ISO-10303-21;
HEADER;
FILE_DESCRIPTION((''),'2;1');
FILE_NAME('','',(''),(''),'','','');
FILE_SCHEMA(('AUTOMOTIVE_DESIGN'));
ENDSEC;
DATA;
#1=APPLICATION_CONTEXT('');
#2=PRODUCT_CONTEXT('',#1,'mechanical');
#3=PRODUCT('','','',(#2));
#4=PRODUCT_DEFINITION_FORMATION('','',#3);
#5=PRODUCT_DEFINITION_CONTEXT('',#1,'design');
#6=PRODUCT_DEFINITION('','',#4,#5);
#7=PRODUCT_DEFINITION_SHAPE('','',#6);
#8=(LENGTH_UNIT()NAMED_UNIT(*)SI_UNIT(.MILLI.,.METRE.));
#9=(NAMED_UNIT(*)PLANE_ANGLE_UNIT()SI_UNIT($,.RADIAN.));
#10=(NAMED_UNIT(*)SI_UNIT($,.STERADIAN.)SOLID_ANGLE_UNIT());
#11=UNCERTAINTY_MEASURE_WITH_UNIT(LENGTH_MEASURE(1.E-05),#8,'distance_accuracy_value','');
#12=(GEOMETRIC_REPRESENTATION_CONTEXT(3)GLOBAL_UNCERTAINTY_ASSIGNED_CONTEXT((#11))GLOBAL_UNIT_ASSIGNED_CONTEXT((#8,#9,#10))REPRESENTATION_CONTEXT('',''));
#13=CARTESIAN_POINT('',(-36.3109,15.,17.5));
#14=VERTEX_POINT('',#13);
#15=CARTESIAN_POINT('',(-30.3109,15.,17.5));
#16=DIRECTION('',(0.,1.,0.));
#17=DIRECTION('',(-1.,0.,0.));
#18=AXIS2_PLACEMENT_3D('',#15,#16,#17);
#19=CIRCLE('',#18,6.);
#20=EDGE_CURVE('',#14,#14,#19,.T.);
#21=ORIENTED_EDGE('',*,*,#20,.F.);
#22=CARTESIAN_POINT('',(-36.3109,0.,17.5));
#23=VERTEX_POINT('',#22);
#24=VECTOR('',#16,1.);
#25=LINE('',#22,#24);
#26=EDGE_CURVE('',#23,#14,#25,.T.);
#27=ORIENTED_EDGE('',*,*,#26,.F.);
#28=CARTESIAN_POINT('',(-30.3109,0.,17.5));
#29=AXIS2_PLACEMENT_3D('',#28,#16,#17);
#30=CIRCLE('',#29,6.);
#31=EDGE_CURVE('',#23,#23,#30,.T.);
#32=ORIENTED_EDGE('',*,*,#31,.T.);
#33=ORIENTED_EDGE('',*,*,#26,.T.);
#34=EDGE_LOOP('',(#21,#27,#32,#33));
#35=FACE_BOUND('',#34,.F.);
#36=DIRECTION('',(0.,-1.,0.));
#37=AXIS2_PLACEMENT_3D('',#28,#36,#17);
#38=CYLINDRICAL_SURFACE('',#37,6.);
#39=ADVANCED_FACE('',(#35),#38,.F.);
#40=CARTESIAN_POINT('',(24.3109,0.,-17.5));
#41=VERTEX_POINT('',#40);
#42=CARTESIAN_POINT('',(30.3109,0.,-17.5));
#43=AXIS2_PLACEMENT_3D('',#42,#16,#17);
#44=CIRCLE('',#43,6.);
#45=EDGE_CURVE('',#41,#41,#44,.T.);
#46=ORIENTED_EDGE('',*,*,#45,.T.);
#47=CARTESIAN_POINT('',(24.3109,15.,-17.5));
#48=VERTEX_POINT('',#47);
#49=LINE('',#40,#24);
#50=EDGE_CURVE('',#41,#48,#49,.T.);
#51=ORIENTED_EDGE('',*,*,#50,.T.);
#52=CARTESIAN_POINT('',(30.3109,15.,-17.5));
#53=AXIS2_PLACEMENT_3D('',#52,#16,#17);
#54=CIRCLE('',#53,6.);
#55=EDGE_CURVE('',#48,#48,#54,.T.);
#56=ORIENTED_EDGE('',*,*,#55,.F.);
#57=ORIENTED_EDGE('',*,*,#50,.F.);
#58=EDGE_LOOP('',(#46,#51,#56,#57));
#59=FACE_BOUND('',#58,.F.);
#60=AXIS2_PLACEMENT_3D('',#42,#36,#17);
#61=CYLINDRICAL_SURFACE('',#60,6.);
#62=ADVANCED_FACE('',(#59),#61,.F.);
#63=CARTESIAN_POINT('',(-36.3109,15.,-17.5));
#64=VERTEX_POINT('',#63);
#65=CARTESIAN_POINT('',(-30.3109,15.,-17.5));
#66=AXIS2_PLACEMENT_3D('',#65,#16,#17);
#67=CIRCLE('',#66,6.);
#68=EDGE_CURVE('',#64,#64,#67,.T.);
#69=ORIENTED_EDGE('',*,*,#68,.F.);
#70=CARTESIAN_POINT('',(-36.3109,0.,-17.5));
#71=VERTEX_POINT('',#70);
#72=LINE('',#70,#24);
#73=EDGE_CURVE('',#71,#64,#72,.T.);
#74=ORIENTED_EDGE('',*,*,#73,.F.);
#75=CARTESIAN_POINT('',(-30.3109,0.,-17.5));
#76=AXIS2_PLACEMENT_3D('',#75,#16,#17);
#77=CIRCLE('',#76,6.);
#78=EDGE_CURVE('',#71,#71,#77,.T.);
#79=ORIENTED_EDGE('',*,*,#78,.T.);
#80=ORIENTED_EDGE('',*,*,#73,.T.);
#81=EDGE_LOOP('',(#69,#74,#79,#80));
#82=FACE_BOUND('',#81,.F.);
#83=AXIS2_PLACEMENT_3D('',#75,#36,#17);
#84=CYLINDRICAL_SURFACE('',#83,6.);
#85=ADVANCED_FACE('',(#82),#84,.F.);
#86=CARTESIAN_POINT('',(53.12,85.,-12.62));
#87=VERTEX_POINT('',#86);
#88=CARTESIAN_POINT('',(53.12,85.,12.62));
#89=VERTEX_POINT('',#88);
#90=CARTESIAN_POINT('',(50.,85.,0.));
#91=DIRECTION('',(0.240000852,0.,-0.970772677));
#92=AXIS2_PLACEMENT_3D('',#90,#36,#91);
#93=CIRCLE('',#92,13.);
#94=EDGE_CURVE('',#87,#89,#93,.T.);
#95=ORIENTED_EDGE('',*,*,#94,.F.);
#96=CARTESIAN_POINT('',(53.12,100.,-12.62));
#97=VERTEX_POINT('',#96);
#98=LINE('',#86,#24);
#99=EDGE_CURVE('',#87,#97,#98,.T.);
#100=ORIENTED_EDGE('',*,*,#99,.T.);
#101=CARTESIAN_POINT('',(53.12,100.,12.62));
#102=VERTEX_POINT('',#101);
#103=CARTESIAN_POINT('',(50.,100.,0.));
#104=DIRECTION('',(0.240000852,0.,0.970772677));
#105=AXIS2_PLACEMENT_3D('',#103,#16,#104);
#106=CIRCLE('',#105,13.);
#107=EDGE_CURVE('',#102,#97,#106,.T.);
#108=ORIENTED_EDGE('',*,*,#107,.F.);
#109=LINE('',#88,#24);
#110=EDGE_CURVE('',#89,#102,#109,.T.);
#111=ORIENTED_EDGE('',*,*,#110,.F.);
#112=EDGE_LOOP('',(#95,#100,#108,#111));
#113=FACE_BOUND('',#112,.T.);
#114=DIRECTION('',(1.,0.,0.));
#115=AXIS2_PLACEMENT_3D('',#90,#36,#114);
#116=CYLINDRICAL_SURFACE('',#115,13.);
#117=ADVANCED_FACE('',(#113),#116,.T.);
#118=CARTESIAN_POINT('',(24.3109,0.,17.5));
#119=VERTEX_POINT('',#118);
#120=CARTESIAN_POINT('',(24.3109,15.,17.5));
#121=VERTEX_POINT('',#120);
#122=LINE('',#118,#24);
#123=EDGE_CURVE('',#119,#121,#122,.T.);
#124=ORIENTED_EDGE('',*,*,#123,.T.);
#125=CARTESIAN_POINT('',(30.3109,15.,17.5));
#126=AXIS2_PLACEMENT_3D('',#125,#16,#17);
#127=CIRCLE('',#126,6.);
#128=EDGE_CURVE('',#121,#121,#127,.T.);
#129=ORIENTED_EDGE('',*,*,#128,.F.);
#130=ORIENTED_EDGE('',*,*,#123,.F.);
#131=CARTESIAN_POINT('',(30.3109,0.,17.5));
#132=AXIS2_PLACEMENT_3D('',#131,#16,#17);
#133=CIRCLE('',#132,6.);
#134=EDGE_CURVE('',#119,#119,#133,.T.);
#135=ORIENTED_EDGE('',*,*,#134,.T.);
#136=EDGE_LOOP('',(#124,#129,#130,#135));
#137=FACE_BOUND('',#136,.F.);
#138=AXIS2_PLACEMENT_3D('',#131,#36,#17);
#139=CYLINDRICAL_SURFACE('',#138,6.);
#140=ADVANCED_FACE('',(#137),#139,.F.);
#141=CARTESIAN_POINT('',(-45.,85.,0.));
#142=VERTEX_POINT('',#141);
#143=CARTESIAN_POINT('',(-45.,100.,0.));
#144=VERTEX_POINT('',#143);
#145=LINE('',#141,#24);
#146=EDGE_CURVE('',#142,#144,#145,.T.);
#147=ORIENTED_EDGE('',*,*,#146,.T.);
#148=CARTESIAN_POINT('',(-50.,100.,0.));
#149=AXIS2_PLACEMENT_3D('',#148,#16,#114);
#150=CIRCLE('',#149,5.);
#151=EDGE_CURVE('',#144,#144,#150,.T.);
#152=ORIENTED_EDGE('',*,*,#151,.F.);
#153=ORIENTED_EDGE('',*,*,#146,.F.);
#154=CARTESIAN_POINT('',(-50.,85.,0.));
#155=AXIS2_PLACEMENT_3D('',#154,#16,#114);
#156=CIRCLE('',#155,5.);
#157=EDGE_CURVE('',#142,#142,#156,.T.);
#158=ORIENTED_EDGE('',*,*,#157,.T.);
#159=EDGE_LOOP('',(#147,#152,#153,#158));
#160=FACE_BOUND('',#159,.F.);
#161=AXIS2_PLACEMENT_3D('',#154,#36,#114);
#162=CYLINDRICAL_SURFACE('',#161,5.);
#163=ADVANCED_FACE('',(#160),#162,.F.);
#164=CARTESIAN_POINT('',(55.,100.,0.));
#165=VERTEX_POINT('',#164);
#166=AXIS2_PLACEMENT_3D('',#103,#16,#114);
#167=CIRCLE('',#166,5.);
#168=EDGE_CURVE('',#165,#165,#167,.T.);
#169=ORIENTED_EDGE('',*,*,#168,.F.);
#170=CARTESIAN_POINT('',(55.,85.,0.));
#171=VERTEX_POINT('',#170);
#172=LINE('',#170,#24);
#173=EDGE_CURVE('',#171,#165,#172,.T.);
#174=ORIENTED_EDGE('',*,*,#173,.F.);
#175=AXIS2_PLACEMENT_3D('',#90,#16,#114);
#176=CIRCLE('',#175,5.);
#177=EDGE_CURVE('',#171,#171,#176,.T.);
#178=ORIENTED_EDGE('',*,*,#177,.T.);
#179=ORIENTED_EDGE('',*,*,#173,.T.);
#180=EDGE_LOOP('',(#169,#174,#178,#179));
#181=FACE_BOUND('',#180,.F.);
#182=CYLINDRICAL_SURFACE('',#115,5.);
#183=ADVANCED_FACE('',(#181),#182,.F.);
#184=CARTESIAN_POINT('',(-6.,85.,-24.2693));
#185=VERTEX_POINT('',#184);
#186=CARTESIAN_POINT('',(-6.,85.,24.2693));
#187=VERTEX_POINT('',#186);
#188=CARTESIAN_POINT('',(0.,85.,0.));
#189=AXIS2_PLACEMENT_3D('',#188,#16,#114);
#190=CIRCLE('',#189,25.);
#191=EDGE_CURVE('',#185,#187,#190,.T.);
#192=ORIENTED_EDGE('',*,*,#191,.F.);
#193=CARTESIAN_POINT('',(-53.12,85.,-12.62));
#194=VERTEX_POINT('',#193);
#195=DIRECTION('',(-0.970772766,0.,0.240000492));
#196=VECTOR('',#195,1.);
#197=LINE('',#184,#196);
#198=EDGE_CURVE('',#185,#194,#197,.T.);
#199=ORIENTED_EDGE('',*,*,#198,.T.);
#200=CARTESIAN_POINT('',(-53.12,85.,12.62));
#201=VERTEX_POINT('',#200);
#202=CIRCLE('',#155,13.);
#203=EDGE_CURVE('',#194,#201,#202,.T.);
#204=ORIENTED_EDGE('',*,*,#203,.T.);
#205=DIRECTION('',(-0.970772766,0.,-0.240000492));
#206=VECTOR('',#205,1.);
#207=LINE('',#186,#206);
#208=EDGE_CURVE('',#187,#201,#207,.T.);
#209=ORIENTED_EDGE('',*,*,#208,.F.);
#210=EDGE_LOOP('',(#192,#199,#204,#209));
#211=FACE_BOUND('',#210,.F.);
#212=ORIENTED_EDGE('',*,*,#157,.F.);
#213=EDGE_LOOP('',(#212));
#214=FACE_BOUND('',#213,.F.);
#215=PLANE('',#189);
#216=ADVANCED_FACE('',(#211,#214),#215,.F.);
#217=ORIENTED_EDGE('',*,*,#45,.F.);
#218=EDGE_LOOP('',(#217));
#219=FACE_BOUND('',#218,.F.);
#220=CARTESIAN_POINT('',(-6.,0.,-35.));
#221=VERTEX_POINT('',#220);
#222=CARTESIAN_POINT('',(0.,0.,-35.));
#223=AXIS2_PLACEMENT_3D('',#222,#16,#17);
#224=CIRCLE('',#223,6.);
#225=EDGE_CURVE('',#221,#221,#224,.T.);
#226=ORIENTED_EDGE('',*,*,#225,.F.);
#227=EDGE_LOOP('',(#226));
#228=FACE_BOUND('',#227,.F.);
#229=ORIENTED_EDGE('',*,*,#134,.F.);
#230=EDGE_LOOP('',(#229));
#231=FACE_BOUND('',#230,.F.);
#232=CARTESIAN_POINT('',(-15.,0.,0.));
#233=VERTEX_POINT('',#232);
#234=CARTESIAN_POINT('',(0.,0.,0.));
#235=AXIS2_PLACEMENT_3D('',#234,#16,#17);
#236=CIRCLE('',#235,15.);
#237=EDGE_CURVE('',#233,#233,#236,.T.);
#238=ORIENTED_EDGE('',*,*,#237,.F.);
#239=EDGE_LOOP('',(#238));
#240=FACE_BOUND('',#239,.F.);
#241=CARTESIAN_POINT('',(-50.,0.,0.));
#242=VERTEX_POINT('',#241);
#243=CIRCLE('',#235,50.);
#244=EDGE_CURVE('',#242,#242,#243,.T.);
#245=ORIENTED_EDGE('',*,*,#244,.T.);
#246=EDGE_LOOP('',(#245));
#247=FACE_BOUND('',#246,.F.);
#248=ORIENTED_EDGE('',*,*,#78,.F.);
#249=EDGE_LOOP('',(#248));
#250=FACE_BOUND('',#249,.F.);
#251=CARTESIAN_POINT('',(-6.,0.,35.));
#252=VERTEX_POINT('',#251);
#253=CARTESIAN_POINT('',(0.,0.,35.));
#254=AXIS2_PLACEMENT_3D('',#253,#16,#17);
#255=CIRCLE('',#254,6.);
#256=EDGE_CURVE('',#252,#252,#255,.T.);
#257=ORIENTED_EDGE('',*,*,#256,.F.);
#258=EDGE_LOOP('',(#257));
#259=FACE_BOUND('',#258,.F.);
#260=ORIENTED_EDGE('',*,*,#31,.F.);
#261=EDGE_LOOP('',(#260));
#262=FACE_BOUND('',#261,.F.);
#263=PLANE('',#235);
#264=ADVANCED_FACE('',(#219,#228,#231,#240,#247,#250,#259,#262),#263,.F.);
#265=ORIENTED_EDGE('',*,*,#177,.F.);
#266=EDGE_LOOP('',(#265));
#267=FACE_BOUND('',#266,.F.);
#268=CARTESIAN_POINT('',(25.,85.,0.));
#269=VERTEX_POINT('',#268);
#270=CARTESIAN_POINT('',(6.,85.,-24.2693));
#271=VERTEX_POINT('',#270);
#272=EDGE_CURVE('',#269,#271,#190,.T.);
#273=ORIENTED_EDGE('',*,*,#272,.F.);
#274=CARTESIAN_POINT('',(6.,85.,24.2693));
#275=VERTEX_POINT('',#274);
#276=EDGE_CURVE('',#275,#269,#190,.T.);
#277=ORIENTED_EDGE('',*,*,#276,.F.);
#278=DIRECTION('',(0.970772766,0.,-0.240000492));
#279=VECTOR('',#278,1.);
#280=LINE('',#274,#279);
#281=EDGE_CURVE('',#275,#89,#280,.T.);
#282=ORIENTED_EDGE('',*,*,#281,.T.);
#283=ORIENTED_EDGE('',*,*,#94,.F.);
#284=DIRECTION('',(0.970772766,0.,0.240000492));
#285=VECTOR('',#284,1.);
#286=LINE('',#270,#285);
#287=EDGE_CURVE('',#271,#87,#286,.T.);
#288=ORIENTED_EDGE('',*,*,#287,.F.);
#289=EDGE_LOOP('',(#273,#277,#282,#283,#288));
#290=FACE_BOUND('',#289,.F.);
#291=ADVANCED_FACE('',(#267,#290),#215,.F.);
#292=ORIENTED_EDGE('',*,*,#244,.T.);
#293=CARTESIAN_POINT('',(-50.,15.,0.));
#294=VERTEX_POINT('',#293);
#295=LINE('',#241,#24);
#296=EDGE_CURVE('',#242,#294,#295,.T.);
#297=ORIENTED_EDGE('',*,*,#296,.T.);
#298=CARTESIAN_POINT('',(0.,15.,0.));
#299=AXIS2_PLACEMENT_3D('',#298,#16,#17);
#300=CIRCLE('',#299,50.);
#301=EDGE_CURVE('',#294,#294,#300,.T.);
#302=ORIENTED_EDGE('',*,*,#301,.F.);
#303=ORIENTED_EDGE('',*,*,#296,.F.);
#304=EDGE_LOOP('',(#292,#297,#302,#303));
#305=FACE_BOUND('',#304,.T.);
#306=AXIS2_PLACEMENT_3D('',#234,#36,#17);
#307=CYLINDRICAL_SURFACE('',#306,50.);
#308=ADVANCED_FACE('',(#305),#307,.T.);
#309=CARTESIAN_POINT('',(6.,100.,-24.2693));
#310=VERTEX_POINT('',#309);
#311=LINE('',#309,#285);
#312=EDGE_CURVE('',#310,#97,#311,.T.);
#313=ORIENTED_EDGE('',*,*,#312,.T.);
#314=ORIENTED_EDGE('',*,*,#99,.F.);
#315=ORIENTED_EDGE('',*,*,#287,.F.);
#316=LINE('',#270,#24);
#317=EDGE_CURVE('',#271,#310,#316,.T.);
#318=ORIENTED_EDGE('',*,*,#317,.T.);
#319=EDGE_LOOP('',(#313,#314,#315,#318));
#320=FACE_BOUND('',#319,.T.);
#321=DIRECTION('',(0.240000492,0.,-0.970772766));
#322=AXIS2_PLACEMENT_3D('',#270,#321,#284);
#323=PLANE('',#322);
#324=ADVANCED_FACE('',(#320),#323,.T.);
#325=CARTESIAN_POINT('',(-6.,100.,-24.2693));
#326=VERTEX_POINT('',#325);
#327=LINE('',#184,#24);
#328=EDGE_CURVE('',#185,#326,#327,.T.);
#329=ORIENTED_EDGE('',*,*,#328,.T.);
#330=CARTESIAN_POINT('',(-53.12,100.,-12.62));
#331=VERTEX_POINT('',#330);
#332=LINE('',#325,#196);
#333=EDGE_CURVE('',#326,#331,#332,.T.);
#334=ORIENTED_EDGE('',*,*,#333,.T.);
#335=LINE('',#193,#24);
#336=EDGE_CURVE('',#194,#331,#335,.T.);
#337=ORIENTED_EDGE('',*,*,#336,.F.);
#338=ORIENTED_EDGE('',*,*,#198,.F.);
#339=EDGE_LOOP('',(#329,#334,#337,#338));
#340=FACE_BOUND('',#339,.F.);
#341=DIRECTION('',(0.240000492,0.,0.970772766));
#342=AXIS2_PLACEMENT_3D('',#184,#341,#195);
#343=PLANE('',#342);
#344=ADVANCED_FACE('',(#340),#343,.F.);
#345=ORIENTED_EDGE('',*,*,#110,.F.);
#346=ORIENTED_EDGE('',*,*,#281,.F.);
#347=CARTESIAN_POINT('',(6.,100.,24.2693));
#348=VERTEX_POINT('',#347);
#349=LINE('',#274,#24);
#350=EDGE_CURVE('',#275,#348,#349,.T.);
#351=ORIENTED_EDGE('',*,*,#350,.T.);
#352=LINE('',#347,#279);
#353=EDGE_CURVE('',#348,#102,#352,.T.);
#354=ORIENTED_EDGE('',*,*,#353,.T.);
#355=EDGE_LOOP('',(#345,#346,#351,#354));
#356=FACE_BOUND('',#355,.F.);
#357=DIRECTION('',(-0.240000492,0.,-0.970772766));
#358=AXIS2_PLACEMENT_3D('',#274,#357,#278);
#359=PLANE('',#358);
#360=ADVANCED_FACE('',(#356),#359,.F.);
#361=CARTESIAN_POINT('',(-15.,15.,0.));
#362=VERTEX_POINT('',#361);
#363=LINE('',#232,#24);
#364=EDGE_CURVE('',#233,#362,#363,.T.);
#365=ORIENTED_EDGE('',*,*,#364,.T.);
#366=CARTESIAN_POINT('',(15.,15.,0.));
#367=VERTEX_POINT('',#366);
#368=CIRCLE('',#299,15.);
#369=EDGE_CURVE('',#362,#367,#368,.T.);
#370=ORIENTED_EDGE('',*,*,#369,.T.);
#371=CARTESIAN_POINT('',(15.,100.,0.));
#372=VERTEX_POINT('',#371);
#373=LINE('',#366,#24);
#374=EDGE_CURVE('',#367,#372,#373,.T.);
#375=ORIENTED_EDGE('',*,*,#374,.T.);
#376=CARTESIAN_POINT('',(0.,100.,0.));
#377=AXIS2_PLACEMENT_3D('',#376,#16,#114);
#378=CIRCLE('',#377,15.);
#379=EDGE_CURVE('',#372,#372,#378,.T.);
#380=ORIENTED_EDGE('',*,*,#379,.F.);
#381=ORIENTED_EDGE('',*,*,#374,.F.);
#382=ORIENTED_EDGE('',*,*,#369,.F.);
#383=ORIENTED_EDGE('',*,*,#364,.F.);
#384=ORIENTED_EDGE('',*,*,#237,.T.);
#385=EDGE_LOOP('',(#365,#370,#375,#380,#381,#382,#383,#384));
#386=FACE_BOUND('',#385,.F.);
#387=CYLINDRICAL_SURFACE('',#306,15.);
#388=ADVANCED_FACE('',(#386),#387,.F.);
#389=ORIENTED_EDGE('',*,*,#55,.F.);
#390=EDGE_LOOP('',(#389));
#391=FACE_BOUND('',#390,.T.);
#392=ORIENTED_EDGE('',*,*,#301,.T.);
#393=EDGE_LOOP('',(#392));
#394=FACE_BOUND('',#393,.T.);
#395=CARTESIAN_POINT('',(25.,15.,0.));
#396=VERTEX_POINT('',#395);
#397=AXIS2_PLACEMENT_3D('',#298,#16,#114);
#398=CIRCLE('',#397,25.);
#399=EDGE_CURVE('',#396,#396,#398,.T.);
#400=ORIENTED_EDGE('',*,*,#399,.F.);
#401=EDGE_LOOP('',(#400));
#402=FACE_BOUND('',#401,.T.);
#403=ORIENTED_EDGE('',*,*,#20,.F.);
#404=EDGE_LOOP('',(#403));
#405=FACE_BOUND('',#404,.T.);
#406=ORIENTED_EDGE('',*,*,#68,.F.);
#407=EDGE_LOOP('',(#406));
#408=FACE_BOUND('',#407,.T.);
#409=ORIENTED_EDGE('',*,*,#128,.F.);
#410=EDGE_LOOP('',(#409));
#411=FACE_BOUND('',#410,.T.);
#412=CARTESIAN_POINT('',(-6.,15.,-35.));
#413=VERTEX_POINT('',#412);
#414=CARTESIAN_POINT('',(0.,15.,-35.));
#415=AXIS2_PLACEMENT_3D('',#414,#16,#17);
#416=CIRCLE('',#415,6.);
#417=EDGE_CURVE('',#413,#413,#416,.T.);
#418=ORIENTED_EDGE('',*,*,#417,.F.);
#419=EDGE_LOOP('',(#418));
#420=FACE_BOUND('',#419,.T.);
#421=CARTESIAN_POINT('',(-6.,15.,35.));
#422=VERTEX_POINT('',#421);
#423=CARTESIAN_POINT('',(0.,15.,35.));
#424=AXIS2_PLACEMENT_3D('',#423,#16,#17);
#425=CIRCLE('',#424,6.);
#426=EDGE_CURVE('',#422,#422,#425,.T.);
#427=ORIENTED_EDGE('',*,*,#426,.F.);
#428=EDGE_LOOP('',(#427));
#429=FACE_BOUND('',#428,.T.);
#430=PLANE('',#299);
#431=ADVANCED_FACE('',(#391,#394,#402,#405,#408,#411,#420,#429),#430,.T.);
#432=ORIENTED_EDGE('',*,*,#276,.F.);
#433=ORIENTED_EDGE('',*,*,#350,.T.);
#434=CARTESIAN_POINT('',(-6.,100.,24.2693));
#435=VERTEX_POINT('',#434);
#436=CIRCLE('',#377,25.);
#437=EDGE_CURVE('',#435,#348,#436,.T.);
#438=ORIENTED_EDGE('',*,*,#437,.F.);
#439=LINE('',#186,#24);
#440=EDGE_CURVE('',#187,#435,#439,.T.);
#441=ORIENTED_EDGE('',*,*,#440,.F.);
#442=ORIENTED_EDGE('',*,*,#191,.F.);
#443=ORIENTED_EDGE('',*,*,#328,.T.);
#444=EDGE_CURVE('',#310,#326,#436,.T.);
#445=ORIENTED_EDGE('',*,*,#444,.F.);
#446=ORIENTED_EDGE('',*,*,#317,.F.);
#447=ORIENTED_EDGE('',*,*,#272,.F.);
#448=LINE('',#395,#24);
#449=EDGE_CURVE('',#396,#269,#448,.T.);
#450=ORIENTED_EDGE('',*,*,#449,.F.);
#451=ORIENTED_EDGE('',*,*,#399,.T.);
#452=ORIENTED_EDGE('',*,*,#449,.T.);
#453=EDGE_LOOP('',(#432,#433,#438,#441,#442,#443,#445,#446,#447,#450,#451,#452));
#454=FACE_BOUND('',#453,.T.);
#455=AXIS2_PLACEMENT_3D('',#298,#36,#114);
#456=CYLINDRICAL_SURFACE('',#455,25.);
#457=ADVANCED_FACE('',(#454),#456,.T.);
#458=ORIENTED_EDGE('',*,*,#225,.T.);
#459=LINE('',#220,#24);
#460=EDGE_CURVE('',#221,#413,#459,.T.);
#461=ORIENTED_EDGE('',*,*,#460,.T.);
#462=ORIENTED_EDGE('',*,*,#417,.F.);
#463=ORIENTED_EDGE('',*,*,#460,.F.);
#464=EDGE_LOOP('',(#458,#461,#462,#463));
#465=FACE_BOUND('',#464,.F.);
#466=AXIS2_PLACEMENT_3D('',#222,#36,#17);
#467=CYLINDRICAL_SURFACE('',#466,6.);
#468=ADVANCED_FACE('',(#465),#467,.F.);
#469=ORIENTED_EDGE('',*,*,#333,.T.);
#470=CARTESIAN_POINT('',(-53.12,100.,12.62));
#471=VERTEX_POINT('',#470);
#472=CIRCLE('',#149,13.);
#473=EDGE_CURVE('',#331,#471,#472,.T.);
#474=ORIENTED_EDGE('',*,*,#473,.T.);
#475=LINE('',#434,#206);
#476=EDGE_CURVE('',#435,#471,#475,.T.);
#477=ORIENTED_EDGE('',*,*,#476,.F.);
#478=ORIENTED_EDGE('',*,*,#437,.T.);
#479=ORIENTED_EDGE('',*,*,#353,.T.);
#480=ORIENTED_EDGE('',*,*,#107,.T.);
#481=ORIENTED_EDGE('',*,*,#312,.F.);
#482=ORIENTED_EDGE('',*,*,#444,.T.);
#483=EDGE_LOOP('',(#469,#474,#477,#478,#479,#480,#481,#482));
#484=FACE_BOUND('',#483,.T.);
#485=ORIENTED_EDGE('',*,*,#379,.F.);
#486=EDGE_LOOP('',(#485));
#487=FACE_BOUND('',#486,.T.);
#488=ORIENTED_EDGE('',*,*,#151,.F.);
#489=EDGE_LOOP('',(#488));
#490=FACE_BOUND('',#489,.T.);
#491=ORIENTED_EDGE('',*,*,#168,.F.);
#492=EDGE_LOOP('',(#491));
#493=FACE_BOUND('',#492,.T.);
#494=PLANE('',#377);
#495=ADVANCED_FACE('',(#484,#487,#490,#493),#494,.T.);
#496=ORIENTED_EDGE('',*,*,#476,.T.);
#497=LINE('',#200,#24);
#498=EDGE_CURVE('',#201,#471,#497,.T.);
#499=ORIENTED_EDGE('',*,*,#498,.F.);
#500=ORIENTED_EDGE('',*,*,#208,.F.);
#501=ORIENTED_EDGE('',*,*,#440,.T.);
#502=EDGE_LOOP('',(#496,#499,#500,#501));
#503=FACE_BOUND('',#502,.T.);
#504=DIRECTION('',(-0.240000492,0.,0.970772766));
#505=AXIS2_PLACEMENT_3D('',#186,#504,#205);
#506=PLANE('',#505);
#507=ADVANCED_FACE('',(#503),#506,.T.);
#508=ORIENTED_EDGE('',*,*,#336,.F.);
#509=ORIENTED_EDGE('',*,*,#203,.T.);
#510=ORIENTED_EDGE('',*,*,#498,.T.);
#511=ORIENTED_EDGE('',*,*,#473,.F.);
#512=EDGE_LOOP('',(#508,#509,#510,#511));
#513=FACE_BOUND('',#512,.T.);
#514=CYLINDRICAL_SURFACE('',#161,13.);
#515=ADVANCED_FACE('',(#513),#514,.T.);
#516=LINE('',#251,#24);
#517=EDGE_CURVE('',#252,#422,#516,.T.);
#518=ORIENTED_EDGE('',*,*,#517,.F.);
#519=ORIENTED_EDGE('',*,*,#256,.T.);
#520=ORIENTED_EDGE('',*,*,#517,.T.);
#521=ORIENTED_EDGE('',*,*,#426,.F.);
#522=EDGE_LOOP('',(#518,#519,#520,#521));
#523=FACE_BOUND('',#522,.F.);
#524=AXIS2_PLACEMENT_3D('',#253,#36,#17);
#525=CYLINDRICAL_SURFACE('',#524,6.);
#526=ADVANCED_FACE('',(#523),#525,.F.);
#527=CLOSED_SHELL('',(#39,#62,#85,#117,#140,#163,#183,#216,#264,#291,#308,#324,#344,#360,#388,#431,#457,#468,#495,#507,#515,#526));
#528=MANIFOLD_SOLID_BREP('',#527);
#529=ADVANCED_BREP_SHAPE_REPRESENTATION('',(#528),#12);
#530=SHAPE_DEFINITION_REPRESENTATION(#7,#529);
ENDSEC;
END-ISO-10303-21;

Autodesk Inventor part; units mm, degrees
ref_plane "YZ Plane" through (0, 0, 0) normal (1, 0, 0) x (0, 1, 0)
ref_plane "XZ Plane" through (0, 0, 0) normal (0, 1, 0) x (-1, 0, 0)
ref_plane "XY Plane" through (0, 0, 0) normal (0, 0, 1) x (1, 0, 0)
sketch "Sketch1" plane through (0, 0, 0) normal (0, 1, 0) x (-1, 0, 0)
  circle A0 centre (0, 0) radius 50
  circle A1 centre (0, 0) radius 15
  circle A2 centre (0, 0) radius 35 construction
  circle A3 centre (0, -35) radius 6
  circle A4 centre (30.3109, -17.5) radius 6
  circle A5 centre (30.3109, 17.5) radius 6
  circle A6 centre (0, 35) radius 6
  circle A7 centre (-30.3109, 17.5) radius 6
  circle A8 centre (-30.3109, -17.5) radius 6
  dimension "d2" = 70
  dimension "d0" = 100
  dimension "d1" = 30
  dimension "d3" = 12
  dimension "d6" = 360
extrude "Extrusion1" add sketch "Sketch1" along normal blind 15
sketch "Sketch2" plane through (0, 15, 0) normal (0, 1, 0) x (1, 0, 0)
  circle A0 centre (0, 0) radius 25
  circle A1 centre (0, 0) radius 15 projected
  dimension "d10" = 50
extrude "Extrusion2" add sketch "Sketch2" along normal blind 70
sketch "Sketch3" plane through (0, 85, 0) normal (0, 1, 0) x (1, 0, 0)
  circle A0 centre (-50, 0) radius 13
  circle A1 centre (-50, 0) radius 5
  circle A2 centre (50, 0) radius 13
  circle A3 centre (50, 0) radius 5
  circle A4 centre (0, 0) radius 50 construction
  circle A5 centre (0, 0) radius 25 projected
  circle A6 centre (0, 0) radius 15 projected
  line L0 (-6, 24.2693) -> (-53.12, 12.62)
  line L1 (-6, -24.2693) -> (-53.12, -12.62)
  line L2 (6, 24.2693) -> (53.12, 12.62)
  line L3 (6, -24.2693) -> (53.12, -12.62)
  dimension "d13" = 26
  dimension "d14" = 10
  dimension "d15" = 26
  dimension "d16" = 10
  dimension "d17" = 100
extrude "Extrusion3" add sketch "Sketch3" along normal blind 15
properties part number "Exercise05"
